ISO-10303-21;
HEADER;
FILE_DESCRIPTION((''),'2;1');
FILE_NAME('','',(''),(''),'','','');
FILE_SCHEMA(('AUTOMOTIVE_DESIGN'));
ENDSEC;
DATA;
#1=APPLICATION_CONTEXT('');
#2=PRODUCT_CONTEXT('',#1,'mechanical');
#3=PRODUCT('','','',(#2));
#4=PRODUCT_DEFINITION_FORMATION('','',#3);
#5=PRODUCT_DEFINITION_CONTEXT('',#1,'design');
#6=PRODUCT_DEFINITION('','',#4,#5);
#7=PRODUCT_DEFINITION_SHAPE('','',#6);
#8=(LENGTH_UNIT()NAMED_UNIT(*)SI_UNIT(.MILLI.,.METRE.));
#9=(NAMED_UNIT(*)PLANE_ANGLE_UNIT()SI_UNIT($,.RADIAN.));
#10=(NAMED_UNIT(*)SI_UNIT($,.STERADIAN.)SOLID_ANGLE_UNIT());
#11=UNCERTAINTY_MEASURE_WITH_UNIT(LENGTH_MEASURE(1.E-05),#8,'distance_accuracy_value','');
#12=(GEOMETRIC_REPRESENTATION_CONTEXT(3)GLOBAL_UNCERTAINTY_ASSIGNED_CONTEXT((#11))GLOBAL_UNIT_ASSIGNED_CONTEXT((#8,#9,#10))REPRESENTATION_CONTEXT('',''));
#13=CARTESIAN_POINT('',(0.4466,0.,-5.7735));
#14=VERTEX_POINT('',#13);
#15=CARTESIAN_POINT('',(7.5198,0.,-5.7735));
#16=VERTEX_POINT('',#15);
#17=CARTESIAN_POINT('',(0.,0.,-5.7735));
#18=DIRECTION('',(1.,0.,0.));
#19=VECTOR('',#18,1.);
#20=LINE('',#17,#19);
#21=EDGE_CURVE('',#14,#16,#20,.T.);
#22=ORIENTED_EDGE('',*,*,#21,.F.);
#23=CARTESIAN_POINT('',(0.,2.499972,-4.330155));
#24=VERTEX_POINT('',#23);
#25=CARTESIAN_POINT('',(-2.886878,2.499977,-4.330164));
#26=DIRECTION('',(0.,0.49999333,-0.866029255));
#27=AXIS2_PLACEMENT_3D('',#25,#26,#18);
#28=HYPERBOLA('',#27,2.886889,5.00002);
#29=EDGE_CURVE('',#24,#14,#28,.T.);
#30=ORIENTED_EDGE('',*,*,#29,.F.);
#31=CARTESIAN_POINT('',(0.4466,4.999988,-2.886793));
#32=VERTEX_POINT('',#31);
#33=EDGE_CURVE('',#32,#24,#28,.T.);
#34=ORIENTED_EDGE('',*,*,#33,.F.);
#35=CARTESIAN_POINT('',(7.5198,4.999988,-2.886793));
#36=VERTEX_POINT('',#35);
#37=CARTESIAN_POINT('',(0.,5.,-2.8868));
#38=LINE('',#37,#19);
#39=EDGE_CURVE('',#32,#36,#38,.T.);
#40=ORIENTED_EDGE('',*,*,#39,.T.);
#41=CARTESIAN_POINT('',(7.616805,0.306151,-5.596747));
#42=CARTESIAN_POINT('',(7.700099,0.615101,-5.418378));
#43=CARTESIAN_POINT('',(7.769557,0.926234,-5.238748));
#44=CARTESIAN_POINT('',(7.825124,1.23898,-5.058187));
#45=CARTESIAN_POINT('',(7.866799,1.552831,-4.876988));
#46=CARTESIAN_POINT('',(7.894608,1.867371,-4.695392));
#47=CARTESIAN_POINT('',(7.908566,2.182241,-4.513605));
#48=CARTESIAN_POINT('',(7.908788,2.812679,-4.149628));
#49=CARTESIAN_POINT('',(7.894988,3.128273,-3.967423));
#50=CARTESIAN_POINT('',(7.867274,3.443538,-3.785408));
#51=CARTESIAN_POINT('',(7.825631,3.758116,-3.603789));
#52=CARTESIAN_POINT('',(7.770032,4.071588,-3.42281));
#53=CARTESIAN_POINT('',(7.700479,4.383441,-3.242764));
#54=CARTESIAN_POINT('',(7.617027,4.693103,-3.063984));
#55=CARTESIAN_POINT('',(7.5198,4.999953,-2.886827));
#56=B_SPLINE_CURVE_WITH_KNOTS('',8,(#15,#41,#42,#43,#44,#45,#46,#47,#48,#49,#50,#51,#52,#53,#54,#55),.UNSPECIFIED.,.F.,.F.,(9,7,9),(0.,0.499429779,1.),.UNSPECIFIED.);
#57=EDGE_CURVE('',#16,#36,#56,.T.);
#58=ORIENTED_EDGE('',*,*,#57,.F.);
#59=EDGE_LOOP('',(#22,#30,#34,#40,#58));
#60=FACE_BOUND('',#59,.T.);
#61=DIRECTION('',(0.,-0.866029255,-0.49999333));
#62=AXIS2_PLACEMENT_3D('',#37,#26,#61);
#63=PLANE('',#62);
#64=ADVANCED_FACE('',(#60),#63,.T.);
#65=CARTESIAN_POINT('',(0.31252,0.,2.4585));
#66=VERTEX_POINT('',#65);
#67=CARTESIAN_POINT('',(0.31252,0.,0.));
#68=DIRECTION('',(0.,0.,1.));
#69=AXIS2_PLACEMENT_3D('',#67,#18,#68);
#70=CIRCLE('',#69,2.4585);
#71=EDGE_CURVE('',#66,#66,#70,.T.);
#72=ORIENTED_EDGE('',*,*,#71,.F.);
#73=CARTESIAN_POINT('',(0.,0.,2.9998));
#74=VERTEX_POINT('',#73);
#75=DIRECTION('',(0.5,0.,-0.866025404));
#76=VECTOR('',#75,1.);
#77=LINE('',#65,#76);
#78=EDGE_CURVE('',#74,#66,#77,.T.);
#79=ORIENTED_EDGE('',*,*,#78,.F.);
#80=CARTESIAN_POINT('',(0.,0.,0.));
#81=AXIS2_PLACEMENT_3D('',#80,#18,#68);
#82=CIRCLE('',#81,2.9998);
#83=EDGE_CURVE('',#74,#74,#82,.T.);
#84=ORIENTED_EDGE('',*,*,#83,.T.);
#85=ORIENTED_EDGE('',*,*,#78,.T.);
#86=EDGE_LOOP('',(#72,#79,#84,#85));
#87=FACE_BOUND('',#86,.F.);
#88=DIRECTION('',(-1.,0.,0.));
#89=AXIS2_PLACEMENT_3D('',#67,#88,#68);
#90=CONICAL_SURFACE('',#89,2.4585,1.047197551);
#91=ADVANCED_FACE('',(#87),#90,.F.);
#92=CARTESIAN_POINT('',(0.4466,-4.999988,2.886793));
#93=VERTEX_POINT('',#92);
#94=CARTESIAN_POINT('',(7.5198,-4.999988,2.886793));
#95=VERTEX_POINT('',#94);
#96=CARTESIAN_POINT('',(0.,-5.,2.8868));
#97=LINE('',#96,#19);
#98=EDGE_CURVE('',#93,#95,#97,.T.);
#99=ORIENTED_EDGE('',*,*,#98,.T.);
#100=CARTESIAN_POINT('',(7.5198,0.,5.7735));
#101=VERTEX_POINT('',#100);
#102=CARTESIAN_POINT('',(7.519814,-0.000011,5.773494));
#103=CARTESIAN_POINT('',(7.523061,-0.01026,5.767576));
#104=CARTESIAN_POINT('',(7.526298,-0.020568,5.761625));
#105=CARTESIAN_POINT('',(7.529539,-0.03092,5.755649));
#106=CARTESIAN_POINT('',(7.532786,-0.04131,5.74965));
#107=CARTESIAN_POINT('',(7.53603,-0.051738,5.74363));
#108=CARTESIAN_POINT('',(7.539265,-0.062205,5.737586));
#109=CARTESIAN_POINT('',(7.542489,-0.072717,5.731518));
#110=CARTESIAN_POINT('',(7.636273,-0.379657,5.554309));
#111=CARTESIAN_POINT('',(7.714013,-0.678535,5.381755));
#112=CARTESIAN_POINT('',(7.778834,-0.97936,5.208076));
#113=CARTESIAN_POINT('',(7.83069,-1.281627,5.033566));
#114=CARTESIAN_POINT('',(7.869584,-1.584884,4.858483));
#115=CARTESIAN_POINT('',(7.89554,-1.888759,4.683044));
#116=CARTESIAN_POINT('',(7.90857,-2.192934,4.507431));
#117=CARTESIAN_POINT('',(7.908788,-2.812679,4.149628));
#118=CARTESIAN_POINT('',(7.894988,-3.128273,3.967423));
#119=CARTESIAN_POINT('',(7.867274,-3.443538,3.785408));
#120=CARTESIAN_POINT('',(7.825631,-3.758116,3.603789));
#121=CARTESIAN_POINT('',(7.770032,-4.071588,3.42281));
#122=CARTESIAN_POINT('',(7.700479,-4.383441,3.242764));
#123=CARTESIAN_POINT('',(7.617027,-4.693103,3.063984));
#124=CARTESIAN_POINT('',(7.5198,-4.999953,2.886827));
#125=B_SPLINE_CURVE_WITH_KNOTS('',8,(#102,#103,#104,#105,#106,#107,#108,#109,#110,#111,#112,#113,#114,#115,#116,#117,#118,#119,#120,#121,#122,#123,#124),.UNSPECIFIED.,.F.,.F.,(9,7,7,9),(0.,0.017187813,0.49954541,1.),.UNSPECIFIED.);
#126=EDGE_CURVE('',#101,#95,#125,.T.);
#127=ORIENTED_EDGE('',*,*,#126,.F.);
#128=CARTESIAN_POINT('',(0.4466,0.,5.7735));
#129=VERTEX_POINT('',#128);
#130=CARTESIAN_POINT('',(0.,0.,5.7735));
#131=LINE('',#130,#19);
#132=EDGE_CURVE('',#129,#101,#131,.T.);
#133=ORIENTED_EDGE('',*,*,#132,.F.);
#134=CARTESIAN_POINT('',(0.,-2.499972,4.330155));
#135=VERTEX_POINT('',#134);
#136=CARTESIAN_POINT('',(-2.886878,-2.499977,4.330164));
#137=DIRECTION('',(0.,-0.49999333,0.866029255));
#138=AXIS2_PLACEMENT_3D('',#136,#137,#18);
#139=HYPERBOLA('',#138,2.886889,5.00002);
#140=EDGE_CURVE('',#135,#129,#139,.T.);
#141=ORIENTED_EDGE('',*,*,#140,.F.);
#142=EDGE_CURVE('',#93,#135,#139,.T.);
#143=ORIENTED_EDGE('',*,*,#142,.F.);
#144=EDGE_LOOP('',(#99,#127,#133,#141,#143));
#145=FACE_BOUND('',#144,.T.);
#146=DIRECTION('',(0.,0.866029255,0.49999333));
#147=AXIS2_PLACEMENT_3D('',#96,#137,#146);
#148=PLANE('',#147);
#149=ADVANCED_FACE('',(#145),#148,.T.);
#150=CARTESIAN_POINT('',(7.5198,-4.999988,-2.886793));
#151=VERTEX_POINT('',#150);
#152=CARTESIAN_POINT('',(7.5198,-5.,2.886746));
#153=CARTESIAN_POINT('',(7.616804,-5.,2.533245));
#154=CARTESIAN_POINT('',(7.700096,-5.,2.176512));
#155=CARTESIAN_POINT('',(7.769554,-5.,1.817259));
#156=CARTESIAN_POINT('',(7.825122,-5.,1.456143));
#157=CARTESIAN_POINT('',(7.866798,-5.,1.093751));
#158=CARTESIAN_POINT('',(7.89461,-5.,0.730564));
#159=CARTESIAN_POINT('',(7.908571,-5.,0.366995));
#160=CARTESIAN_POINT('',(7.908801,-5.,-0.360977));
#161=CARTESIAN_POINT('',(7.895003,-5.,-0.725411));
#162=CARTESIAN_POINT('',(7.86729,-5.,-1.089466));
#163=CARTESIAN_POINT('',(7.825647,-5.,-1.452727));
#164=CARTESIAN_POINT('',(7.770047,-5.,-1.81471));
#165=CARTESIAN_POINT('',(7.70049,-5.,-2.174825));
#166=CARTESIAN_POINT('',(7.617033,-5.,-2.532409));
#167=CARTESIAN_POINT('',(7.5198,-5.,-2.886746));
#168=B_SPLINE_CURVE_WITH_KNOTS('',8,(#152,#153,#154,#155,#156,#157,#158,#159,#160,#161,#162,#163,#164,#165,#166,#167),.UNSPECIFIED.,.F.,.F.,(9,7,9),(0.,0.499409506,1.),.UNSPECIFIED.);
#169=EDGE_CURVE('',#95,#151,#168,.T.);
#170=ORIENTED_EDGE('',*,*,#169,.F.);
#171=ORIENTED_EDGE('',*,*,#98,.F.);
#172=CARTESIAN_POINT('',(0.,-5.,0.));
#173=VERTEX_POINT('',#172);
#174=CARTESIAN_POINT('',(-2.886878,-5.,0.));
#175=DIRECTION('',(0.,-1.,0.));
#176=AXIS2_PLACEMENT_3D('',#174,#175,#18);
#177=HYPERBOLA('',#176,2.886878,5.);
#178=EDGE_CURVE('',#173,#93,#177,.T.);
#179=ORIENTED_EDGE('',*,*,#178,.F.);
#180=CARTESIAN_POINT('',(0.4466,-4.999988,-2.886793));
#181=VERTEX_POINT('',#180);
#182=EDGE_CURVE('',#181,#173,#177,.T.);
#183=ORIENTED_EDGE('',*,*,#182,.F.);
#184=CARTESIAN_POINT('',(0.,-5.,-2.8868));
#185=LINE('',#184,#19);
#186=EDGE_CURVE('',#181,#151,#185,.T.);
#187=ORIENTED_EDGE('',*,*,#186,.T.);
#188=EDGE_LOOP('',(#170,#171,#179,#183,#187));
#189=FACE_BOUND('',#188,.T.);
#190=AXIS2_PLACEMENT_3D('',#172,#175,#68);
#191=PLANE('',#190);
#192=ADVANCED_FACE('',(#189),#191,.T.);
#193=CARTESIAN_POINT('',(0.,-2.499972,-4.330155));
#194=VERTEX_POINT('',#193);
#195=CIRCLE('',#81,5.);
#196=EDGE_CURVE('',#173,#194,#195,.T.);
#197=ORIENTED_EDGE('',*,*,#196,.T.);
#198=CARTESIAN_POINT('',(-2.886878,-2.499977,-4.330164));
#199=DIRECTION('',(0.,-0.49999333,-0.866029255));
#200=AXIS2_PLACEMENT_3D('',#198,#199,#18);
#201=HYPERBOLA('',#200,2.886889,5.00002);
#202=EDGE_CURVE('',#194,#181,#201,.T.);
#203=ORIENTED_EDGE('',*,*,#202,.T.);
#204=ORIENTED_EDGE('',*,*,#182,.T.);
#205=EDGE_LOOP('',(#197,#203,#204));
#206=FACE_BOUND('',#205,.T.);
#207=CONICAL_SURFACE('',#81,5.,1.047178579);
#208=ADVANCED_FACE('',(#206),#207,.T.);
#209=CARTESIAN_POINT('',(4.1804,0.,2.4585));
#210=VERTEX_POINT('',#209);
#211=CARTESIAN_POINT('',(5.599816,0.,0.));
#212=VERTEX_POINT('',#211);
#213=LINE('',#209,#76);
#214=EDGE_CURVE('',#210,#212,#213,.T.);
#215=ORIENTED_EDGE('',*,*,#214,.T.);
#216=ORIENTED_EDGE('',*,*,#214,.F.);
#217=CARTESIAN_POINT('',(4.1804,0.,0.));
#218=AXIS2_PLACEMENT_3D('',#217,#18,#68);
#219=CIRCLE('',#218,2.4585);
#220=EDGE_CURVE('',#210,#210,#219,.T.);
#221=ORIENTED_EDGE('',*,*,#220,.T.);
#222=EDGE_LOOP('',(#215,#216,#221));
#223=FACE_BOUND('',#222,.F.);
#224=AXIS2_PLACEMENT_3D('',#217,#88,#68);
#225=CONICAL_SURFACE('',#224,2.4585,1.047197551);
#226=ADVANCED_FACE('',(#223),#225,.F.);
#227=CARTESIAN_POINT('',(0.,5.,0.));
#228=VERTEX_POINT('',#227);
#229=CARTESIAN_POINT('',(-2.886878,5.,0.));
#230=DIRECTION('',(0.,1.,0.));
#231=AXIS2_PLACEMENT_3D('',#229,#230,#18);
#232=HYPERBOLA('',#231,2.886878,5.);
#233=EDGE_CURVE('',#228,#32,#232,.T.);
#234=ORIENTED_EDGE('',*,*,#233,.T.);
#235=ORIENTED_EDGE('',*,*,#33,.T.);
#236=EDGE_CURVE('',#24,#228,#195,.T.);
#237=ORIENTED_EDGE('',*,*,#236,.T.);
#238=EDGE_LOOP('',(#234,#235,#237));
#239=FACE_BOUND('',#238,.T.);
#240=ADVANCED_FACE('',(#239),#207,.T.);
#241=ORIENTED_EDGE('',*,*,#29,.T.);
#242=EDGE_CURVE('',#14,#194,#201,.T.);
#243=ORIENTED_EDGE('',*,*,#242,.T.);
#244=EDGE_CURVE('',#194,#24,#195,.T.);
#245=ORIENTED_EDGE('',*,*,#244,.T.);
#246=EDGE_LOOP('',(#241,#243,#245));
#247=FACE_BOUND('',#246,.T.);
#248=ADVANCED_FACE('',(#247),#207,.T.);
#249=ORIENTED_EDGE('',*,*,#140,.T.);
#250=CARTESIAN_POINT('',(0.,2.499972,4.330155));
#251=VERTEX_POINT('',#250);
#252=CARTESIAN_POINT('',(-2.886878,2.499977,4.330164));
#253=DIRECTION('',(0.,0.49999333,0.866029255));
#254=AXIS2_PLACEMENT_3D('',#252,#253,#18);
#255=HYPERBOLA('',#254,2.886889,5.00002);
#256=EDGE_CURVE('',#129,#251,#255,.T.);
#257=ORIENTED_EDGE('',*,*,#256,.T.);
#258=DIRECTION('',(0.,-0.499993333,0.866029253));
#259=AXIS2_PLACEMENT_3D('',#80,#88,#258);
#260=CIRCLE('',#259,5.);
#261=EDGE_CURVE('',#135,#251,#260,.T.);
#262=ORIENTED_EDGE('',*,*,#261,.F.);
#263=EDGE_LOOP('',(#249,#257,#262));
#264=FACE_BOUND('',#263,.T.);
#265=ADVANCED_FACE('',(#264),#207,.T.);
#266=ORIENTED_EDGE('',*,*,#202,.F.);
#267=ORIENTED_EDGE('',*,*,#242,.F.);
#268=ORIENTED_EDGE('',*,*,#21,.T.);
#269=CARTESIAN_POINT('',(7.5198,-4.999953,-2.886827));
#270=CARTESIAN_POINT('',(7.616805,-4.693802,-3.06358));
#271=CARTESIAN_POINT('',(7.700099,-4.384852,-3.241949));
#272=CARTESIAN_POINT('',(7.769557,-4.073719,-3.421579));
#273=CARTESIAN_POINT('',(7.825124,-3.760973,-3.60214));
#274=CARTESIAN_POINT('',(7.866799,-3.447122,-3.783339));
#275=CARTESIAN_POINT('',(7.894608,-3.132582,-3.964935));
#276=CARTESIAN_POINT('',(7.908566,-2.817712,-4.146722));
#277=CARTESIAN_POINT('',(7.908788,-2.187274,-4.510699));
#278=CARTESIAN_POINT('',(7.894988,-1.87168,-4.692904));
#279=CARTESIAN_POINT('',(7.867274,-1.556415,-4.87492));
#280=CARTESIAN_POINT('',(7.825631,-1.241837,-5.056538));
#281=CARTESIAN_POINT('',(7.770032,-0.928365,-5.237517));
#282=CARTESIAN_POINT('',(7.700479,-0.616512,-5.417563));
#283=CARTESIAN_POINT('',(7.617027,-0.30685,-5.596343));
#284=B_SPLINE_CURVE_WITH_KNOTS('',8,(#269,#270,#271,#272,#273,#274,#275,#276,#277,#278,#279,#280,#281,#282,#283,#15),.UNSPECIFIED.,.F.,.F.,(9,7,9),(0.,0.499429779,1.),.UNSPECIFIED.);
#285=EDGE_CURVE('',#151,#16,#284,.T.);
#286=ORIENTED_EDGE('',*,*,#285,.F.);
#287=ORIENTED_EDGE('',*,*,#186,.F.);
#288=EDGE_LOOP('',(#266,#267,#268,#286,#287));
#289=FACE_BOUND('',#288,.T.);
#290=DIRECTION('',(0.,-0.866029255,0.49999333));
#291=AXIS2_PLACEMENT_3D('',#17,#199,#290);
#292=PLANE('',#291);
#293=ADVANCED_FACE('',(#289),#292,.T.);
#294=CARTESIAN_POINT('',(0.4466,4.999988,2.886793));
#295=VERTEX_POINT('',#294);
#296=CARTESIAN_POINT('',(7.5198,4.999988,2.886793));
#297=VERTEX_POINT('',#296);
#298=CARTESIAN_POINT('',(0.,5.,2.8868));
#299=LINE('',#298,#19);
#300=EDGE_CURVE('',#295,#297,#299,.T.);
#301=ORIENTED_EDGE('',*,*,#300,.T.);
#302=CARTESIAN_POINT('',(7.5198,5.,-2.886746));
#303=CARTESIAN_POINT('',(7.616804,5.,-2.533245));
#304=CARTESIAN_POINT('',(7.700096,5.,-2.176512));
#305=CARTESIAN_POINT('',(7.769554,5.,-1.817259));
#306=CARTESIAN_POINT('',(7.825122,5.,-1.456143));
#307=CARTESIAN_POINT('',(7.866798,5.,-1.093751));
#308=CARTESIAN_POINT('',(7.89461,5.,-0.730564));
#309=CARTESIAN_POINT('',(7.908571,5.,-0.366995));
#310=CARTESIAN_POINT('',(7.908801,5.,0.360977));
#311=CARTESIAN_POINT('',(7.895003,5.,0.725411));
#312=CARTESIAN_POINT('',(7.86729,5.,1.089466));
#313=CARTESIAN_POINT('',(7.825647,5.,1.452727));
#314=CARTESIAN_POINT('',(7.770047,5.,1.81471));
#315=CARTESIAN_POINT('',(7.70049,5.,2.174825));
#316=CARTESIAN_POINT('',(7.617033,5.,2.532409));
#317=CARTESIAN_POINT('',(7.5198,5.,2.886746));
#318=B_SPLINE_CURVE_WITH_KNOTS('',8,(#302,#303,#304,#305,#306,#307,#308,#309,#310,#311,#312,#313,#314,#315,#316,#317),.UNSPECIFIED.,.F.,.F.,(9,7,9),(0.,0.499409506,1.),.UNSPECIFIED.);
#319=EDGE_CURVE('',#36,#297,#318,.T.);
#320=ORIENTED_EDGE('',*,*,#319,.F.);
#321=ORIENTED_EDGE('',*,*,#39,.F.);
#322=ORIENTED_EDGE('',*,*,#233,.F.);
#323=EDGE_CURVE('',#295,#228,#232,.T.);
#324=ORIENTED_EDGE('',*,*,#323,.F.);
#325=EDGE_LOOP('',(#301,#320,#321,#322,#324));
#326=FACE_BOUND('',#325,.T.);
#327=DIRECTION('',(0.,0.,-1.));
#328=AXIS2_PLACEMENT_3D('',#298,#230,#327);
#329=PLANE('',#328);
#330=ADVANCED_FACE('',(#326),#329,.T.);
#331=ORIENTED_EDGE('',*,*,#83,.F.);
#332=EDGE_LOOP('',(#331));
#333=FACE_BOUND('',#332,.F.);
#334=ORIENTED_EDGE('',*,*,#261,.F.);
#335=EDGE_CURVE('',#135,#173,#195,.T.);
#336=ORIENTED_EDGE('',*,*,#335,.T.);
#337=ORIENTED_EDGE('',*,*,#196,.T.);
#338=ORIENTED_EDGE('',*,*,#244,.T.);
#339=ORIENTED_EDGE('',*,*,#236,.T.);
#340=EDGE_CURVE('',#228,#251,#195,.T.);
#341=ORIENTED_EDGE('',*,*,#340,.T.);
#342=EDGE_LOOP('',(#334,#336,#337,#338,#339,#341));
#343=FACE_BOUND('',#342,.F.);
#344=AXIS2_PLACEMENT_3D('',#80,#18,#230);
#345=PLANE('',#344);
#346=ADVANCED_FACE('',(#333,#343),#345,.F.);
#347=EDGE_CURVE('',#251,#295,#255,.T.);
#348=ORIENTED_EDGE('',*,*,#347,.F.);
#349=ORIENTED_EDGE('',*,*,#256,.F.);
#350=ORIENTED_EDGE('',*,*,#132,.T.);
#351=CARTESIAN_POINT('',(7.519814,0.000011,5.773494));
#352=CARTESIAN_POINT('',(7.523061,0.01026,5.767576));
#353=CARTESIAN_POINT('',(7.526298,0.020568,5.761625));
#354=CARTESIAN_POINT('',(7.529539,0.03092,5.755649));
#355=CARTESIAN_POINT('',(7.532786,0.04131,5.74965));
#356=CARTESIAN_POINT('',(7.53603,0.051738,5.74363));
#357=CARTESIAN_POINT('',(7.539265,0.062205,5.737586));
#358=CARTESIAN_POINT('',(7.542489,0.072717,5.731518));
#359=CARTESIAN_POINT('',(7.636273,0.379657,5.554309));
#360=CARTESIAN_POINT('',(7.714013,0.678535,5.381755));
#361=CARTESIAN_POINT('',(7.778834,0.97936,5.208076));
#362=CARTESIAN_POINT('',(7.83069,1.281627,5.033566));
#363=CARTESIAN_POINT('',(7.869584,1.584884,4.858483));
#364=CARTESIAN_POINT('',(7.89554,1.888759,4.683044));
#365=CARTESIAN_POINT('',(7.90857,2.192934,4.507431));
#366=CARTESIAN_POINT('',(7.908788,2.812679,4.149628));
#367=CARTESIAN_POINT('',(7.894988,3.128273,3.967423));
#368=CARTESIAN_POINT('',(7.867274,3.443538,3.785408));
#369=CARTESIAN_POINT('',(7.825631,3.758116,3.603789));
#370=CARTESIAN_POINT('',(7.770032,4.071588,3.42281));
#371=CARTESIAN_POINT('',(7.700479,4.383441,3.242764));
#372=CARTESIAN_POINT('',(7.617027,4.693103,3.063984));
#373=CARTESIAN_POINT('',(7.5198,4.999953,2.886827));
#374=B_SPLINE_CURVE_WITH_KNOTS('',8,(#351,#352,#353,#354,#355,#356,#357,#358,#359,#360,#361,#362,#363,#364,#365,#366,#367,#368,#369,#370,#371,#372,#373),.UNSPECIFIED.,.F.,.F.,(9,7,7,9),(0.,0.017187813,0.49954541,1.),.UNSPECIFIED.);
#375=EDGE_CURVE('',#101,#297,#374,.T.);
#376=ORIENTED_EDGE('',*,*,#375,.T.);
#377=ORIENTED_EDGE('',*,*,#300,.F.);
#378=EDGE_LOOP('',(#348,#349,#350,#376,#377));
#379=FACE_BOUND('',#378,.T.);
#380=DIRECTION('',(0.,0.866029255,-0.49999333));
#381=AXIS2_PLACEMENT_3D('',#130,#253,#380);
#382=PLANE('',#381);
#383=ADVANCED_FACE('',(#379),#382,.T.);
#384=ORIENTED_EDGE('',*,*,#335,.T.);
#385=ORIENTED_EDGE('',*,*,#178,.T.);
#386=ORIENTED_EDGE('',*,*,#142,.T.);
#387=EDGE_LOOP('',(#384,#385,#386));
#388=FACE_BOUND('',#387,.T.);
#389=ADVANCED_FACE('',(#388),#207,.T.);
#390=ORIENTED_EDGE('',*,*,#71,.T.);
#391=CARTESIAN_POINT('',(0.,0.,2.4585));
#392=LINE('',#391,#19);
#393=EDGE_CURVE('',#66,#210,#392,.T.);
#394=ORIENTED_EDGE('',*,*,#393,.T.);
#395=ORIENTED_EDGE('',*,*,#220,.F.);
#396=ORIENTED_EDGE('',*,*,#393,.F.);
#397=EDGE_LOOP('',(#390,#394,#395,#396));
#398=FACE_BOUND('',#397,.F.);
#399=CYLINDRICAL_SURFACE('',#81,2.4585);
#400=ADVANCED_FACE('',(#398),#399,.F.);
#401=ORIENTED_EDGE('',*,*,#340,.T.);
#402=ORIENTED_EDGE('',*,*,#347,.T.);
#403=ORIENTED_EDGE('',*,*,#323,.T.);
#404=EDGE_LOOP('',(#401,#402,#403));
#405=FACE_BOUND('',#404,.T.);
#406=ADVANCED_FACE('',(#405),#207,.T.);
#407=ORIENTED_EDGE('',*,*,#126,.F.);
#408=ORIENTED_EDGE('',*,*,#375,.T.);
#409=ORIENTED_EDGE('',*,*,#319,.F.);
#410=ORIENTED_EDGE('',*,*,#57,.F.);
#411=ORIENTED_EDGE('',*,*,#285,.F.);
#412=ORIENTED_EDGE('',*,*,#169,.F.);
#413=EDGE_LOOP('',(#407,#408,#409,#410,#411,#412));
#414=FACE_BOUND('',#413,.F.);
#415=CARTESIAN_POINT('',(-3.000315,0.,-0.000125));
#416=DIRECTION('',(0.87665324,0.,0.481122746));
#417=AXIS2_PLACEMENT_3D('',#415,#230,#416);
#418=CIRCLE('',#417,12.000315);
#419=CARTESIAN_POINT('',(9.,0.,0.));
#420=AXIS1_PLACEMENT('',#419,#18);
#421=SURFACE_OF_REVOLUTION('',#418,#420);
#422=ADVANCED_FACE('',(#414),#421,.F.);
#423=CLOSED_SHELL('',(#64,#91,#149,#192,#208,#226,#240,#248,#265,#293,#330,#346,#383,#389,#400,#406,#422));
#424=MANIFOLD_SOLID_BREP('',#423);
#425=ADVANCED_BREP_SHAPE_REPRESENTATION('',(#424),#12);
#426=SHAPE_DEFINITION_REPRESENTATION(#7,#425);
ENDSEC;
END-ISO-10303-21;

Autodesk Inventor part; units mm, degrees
ref_plane "YZ Plane" through (0, 0, 0) normal (1, 0, 0) x (0, 1, 0)
ref_plane "XZ Plane" through (0, 0, 0) normal (0, 1, 0) x (-1, 0, 0)
sketch "Sketch1" plane through (0, 0, 0) normal (1, 0, 0) x (0, 1, 0)
  line L0 (-7, 0) -> (7, 0) projected
  line L1 (0, -8.0829) -> (0, 8.0829) projected
  line L2 (0, 5.7735) -> (5, 2.8868)
  line L3 (5, 2.8868) -> (5, -2.8868)
  line L4 (5, -2.8868) -> (0, -5.7735)
  line L5 (0, -5.7735) -> (-5, -2.8868)
  line L6 (-5, -2.8868) -> (-5, 2.8868)
  line L7 (-5, 2.8868) -> (0, 5.7735)
  point P0 (0, 0)
  dimension "d0" = 10
extrude "Body" add sketch "Sketch1" along normal blind 9
sketch "Sketch2" plane through (0, 0, 0) normal (-1, 0, 0) x (0, 0, 1)
  line L0 (0, -7) -> (0, 7) projected
  line L1 (-8.0829, 0) -> (8.0829, 0) projected
  point P0 (0, 0)
hole "Thread" at (0, 0, 0) direction (1, 0, 0) diameter 4.917 depth 4.1804 tip angle 120 thread size "M6x1" class "6H" standard "ISO Metric profile"
chamfer "Chamfer1" distance 0.5413 angle 30 1 edges at (0, 0, -2.4585) measured on face at (0, 4.1469, 0.0988)
sketch "Sketch3" plane through (0, 0, 0) normal (0, 1, 0) x (-1, 0, 0)
  line L0 (0, -2.8868) -> (0, 2.8868) projected
  line L1 (0, 5) -> (-0.4466, 5.7735)
  line L2 (-0.4466, 5.7735) -> (0, 5.7735)
  line L3 (0, 5.7735) -> (0, 5)
  line L4 (0, 2.8868) -> (0, -2.8868) projected
  line L5 (0, 5.7735) -> (-9, 5.7735) projected
  line L6 (5.4728, 0) -> (-11.837, 0) projected
  line L7 (-9, 5.7735) -> (-9, 0)
  arc A0 (-7.5198, 5.7735) -> (-9, 0) centre (3, 0) ccw
  line L8 (-9, 5.7735) -> (-7.5198, 5.7735)
  dimension "d12" = 10
  dimension "d13" = 30
  dimension "d14" = 12
revolve "Chamfer2" cut sketch "Sketch3" angle 360 about axis through (-10, 0, 0) along (1, 0, 0) contours L1 L2 L3
revolve "Cut1" cut sketch "Sketch3" angle 360 about axis through (-10, 0, 0) along (1, 0, 0) contours A0 L7 L5
ref_plane "Work Plane1" through (4.8902, 0, 0) normal (0, 1, 0) x (-1, 0, 0)
equation "\"d0\" = SW"
equation "\"d1\" = GEL"
equation "\"d8\" = 0.8 * KOH1 - 0.288675 * GD1"
equation "\"d10\" = -0.5 * GD1 + 0.5 * NND"
equation "\"d20\" = -0.5 * GD1 + 0.5 * NND"
equation "\"d12\" = SW0"
equation "\"d13\" = ANG1"
equation "\"d14\" = KR"
equation "\"ANG1\" = 30deg"
equation "\"NND\" = 6"
equation "\"GEL\" = 9"
equation "\"KOH1\" = 7"
equation "\"SW\" = 10"
equation "\"KR\" = 12"
equation "\"SW0\" = 10"
equation "\"GUL\" = 0.541266 * PTC"
equation "\"THREADDIA\" = 6"
equation "\"TOA\" = 30deg"
equation "\"PTC\" = 1"
equation "\"E0\" = 11.55"
equation "\"GAL\" = 0.541266 * PTC"
equation "\"GD1\" = 4.917468"
properties part number "CNS 4472 - M 6" material "Steel, Mild"
